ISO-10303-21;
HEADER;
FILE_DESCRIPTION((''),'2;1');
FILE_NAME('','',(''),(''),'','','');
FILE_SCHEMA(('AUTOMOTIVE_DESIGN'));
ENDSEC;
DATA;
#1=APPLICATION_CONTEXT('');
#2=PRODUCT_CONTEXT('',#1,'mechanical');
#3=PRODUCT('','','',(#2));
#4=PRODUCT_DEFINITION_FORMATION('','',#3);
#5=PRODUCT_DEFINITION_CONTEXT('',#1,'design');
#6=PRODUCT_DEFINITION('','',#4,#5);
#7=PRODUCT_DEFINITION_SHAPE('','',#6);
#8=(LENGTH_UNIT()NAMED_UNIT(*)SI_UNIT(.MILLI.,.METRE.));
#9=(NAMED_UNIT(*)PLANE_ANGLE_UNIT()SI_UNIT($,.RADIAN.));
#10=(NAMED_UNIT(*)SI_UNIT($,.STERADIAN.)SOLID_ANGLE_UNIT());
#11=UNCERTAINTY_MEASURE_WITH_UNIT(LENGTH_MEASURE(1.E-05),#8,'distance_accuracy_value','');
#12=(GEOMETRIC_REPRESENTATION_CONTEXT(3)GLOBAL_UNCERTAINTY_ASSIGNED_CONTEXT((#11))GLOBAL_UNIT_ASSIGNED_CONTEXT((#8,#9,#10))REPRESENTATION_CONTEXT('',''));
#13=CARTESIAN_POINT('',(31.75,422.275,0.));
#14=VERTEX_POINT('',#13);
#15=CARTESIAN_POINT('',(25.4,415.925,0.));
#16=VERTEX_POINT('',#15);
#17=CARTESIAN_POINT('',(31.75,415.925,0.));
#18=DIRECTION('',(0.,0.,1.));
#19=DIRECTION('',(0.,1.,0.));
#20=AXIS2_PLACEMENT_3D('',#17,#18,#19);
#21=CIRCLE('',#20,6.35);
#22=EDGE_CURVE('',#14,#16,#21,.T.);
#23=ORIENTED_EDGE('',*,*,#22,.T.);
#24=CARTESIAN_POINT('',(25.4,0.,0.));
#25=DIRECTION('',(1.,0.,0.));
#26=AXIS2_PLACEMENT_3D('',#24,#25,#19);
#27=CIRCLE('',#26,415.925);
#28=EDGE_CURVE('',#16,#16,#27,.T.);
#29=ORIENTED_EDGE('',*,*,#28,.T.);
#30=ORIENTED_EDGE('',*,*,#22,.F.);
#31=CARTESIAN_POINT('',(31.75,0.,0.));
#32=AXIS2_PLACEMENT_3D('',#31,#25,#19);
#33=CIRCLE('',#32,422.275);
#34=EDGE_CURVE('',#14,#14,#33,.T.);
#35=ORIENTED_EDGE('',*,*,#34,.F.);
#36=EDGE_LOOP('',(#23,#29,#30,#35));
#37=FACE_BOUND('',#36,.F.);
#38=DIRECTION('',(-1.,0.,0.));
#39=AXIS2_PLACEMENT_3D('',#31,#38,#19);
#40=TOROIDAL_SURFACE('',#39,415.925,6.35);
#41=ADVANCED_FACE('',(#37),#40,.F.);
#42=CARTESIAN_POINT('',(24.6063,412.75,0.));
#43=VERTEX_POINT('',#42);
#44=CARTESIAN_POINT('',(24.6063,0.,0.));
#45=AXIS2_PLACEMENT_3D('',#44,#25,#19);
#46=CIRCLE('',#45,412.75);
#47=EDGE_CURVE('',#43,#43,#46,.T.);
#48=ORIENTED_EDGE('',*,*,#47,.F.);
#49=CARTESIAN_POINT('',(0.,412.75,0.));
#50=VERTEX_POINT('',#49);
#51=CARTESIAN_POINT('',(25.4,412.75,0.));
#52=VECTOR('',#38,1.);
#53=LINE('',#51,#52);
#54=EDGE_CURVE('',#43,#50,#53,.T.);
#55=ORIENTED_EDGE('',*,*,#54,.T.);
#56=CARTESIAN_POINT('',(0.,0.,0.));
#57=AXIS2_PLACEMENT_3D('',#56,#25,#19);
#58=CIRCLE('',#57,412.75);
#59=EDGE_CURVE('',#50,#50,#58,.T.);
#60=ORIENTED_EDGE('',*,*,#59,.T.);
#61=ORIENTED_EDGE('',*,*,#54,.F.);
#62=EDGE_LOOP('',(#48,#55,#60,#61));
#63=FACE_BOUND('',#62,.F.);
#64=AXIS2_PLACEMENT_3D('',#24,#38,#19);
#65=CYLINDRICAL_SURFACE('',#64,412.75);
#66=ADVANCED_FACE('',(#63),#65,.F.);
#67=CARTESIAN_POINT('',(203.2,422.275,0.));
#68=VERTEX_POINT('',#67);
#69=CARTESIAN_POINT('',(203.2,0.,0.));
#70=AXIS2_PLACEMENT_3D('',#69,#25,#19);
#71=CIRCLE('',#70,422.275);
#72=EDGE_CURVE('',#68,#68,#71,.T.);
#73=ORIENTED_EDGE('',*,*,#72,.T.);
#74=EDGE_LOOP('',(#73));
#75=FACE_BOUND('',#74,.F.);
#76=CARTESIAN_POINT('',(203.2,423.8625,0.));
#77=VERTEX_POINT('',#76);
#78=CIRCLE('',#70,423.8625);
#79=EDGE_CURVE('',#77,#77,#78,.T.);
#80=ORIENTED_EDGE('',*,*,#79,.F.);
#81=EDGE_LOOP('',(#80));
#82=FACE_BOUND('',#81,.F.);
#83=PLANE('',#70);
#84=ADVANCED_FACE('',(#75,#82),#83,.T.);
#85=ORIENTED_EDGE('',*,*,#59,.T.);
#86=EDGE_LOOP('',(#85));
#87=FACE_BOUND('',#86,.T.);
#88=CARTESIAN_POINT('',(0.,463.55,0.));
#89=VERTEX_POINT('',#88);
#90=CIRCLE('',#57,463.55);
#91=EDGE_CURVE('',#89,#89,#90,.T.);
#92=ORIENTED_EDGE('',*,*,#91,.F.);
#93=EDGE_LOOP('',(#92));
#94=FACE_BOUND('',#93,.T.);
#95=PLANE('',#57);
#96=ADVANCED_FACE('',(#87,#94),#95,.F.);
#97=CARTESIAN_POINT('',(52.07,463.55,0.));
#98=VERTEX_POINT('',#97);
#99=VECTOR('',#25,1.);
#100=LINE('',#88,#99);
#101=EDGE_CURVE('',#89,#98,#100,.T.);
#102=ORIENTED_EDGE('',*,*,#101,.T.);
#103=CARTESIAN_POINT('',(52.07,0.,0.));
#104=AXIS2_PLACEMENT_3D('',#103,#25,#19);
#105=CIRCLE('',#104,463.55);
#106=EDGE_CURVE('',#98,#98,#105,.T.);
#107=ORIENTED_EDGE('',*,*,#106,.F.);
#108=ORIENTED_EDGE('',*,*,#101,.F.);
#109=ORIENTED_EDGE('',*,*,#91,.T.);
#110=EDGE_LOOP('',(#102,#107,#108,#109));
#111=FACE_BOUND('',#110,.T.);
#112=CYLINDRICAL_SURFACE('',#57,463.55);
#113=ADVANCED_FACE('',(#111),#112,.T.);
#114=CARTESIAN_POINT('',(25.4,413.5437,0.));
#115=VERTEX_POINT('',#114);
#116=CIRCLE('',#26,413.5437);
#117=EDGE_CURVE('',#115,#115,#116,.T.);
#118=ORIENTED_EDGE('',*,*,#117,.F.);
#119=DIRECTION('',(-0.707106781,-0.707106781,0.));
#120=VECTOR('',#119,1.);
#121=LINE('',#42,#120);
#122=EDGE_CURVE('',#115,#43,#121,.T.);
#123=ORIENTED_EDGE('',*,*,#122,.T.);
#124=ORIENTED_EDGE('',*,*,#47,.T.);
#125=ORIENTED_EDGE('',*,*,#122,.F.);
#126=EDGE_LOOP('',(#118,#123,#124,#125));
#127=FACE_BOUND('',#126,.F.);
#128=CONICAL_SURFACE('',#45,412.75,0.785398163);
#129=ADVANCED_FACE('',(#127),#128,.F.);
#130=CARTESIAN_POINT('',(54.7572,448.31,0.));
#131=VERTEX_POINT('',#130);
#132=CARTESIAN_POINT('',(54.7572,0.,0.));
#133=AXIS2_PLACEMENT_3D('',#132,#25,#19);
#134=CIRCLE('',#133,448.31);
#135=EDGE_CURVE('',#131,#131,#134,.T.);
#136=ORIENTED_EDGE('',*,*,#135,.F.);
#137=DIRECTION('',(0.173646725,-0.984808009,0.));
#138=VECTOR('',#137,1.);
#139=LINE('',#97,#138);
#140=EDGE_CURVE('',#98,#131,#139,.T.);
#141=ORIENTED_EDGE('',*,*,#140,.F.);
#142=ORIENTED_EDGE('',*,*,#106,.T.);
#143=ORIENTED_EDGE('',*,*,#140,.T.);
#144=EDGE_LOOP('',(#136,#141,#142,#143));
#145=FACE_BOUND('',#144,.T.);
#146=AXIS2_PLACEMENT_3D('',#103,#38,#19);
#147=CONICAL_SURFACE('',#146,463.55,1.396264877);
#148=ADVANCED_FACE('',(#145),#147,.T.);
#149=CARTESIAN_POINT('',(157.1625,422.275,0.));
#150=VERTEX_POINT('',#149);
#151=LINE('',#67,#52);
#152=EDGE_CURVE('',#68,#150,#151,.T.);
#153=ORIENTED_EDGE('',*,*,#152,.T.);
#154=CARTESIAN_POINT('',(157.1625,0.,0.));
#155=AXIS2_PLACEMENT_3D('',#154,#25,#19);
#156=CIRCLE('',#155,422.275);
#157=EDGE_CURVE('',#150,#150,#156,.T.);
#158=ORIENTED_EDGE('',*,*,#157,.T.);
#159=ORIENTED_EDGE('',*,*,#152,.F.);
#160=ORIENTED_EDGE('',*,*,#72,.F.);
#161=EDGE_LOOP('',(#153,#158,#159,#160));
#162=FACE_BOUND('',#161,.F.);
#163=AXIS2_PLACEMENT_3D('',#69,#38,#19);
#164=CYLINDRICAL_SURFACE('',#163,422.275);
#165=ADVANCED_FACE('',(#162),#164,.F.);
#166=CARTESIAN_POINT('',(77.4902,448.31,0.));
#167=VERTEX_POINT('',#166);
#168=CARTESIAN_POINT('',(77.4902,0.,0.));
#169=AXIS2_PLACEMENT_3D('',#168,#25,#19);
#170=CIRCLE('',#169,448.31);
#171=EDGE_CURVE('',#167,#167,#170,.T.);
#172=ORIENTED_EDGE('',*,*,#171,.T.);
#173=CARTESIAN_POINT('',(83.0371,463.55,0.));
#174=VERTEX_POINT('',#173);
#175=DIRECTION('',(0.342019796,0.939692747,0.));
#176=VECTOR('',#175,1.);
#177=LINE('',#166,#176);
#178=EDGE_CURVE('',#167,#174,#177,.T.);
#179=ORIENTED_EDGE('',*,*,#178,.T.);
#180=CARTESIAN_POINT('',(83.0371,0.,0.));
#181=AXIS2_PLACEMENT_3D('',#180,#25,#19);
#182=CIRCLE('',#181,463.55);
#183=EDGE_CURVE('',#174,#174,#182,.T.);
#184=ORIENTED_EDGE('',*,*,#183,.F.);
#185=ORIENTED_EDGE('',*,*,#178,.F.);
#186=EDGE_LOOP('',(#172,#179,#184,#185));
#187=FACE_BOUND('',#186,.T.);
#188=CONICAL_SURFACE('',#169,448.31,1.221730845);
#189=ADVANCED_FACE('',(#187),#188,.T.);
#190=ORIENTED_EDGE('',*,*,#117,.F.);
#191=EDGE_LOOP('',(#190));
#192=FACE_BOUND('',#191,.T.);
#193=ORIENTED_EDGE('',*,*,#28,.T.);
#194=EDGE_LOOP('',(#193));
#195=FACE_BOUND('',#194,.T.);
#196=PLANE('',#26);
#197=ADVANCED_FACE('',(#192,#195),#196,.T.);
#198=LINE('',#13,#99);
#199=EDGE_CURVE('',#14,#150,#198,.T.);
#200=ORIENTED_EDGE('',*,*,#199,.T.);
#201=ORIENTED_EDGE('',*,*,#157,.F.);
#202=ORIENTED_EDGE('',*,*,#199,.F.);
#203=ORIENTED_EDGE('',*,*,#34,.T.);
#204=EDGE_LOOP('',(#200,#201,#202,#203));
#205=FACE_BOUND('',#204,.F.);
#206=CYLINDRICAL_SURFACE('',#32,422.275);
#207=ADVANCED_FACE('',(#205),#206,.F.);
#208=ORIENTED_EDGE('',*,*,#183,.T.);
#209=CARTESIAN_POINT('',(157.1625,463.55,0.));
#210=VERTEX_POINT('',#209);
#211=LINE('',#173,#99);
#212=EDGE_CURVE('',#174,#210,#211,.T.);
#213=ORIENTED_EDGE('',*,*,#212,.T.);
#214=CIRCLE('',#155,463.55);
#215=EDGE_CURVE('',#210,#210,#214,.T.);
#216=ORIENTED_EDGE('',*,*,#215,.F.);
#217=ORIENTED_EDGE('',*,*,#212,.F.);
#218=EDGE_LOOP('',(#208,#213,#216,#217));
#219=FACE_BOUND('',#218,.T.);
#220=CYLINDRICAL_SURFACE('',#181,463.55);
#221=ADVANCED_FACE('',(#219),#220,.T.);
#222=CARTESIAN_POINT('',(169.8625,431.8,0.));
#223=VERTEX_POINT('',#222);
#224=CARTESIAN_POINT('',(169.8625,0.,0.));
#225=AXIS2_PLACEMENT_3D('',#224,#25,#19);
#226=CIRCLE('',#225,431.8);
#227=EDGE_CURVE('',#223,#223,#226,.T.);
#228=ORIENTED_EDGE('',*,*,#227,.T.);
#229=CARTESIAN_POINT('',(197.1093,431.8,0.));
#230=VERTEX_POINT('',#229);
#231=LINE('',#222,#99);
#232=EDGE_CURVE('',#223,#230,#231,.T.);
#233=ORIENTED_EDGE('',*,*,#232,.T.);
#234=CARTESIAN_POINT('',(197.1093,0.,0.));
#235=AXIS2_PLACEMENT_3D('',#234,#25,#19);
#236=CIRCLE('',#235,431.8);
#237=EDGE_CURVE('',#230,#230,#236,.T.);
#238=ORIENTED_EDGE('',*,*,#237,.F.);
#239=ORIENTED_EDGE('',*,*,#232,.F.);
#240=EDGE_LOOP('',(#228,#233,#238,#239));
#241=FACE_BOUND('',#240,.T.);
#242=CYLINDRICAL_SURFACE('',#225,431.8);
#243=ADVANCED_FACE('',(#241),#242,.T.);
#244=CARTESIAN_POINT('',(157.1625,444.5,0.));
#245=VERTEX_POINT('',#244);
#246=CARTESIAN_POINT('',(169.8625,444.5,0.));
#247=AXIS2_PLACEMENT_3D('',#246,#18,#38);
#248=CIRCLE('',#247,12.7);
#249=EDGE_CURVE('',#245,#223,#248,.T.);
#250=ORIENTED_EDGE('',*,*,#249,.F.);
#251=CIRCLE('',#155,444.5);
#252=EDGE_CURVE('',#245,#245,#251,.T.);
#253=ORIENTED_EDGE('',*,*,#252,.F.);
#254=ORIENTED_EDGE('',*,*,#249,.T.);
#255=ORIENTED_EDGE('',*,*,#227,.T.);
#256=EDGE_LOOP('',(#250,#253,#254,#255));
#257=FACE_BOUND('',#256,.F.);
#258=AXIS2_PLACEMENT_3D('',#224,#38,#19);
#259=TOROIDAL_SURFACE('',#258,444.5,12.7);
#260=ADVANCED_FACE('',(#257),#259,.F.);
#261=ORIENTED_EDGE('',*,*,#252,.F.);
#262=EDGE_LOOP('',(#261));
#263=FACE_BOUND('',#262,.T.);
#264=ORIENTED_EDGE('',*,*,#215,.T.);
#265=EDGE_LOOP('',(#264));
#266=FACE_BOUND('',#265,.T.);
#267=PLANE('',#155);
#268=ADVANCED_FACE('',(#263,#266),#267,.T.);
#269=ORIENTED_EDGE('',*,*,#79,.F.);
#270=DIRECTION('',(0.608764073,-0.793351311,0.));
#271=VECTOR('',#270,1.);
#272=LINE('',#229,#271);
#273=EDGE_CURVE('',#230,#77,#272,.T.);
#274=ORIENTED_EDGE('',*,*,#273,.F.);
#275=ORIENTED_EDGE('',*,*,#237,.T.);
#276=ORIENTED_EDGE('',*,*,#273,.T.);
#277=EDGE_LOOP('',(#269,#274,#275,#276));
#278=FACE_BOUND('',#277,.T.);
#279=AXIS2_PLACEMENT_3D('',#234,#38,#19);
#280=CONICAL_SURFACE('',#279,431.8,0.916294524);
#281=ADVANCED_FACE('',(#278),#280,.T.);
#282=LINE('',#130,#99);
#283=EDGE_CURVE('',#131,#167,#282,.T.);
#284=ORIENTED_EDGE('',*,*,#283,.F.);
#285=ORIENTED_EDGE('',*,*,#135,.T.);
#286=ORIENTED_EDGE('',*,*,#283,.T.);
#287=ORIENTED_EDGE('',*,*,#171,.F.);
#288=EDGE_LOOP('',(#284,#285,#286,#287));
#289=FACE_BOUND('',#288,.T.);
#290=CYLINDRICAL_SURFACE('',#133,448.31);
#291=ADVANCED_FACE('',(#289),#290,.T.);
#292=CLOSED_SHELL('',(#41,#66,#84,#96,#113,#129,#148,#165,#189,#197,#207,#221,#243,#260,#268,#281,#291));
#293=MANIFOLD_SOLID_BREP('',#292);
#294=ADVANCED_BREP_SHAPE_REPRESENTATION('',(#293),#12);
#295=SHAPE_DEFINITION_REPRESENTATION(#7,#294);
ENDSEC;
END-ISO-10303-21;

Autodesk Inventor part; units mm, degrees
ref_plane "YZ Plane" through (0, 0, 0) normal (1, 0, 0) x (0, 1, 0)
ref_plane "XZ Plane" through (0, 0, 0) normal (0, 1, 0) x (-1, 0, 0)
ref_plane "XY Plane" through (0, 0, 0) normal (0, 0, 1) x (1, 0, 0)
sketch "Sketch1" plane through (0, 0, 0) normal (0, 0, 1) x (1, 0, 0)
  line L0 (0, 412.75) -> (0, 463.55)
  line L1 (0, 463.55) -> (52.07, 463.55)
  line L2 (52.07, 463.55) -> (54.7572, 448.31)
  line L3 (54.7572, 448.31) -> (77.4902, 448.31)
  line L4 (77.4902, 448.31) -> (83.0371, 463.55)
  line L5 (83.0371, 463.55) -> (157.1625, 463.55)
  line L6 (169.8625, 431.8) -> (197.1093, 431.8)
  line L7 (197.1093, 431.8) -> (203.2, 423.8625)
  line L8 (203.2, 422.275) -> (157.1625, 422.275)
  line L9 (25.4, 415.925) -> (25.4, 412.75)
  line L10 (25.4, 412.75) -> (0, 412.75)
  arc A0 (31.75, 422.275) -> (25.4, 415.925) centre (31.75, 415.925) ccw
  line L11 (-40.64, 0) -> (243.84, 0) projected
  line L12 (203.2, 422.275) -> (203.2, 423.8625)
  line L13 (31.75, 422.275) -> (157.1625, 422.275)
  line L14 (157.1625, 463.55) -> (157.1625, 444.5)
  arc A1 (157.1625, 444.5) -> (169.8625, 431.8) centre (169.8625, 444.5) ccw
  point P0 (0, 0)
  dimension "d0" = 463.55
  dimension "d3" = 431.8
  dimension "d5" = 7.9375
  dimension "d10" = 6.35
  dimension "d12" = 412.75
  dimension "d13" = 52.07
  dimension "d17" = 9.525
  dimension "d35" = 25.4
  dimension "d38" = 10
  dimension "d39" = 20
  dimension "d40" = 22.733
  dimension "d41" = 15.24
  dimension "d44" = 203.2
  dimension "d45" = 37.5
  dimension "d55" = 422.275
  dimension "d58" = 12.7
  dimension "d59" = 157.1625
revolve "Revolution1" add sketch "Sketch1" angle 360 about axis through (-10, 0, 0) along (1, 0, 0)
chamfer "Chamfer2" distance 0.7937 angle 45 2 edges at (25.4, -415.925, 0) (25.4, -412.75, 0)
properties part number "A1-19027-400-04 34in Type B Victaulic ring" material "Steel, Mild"
